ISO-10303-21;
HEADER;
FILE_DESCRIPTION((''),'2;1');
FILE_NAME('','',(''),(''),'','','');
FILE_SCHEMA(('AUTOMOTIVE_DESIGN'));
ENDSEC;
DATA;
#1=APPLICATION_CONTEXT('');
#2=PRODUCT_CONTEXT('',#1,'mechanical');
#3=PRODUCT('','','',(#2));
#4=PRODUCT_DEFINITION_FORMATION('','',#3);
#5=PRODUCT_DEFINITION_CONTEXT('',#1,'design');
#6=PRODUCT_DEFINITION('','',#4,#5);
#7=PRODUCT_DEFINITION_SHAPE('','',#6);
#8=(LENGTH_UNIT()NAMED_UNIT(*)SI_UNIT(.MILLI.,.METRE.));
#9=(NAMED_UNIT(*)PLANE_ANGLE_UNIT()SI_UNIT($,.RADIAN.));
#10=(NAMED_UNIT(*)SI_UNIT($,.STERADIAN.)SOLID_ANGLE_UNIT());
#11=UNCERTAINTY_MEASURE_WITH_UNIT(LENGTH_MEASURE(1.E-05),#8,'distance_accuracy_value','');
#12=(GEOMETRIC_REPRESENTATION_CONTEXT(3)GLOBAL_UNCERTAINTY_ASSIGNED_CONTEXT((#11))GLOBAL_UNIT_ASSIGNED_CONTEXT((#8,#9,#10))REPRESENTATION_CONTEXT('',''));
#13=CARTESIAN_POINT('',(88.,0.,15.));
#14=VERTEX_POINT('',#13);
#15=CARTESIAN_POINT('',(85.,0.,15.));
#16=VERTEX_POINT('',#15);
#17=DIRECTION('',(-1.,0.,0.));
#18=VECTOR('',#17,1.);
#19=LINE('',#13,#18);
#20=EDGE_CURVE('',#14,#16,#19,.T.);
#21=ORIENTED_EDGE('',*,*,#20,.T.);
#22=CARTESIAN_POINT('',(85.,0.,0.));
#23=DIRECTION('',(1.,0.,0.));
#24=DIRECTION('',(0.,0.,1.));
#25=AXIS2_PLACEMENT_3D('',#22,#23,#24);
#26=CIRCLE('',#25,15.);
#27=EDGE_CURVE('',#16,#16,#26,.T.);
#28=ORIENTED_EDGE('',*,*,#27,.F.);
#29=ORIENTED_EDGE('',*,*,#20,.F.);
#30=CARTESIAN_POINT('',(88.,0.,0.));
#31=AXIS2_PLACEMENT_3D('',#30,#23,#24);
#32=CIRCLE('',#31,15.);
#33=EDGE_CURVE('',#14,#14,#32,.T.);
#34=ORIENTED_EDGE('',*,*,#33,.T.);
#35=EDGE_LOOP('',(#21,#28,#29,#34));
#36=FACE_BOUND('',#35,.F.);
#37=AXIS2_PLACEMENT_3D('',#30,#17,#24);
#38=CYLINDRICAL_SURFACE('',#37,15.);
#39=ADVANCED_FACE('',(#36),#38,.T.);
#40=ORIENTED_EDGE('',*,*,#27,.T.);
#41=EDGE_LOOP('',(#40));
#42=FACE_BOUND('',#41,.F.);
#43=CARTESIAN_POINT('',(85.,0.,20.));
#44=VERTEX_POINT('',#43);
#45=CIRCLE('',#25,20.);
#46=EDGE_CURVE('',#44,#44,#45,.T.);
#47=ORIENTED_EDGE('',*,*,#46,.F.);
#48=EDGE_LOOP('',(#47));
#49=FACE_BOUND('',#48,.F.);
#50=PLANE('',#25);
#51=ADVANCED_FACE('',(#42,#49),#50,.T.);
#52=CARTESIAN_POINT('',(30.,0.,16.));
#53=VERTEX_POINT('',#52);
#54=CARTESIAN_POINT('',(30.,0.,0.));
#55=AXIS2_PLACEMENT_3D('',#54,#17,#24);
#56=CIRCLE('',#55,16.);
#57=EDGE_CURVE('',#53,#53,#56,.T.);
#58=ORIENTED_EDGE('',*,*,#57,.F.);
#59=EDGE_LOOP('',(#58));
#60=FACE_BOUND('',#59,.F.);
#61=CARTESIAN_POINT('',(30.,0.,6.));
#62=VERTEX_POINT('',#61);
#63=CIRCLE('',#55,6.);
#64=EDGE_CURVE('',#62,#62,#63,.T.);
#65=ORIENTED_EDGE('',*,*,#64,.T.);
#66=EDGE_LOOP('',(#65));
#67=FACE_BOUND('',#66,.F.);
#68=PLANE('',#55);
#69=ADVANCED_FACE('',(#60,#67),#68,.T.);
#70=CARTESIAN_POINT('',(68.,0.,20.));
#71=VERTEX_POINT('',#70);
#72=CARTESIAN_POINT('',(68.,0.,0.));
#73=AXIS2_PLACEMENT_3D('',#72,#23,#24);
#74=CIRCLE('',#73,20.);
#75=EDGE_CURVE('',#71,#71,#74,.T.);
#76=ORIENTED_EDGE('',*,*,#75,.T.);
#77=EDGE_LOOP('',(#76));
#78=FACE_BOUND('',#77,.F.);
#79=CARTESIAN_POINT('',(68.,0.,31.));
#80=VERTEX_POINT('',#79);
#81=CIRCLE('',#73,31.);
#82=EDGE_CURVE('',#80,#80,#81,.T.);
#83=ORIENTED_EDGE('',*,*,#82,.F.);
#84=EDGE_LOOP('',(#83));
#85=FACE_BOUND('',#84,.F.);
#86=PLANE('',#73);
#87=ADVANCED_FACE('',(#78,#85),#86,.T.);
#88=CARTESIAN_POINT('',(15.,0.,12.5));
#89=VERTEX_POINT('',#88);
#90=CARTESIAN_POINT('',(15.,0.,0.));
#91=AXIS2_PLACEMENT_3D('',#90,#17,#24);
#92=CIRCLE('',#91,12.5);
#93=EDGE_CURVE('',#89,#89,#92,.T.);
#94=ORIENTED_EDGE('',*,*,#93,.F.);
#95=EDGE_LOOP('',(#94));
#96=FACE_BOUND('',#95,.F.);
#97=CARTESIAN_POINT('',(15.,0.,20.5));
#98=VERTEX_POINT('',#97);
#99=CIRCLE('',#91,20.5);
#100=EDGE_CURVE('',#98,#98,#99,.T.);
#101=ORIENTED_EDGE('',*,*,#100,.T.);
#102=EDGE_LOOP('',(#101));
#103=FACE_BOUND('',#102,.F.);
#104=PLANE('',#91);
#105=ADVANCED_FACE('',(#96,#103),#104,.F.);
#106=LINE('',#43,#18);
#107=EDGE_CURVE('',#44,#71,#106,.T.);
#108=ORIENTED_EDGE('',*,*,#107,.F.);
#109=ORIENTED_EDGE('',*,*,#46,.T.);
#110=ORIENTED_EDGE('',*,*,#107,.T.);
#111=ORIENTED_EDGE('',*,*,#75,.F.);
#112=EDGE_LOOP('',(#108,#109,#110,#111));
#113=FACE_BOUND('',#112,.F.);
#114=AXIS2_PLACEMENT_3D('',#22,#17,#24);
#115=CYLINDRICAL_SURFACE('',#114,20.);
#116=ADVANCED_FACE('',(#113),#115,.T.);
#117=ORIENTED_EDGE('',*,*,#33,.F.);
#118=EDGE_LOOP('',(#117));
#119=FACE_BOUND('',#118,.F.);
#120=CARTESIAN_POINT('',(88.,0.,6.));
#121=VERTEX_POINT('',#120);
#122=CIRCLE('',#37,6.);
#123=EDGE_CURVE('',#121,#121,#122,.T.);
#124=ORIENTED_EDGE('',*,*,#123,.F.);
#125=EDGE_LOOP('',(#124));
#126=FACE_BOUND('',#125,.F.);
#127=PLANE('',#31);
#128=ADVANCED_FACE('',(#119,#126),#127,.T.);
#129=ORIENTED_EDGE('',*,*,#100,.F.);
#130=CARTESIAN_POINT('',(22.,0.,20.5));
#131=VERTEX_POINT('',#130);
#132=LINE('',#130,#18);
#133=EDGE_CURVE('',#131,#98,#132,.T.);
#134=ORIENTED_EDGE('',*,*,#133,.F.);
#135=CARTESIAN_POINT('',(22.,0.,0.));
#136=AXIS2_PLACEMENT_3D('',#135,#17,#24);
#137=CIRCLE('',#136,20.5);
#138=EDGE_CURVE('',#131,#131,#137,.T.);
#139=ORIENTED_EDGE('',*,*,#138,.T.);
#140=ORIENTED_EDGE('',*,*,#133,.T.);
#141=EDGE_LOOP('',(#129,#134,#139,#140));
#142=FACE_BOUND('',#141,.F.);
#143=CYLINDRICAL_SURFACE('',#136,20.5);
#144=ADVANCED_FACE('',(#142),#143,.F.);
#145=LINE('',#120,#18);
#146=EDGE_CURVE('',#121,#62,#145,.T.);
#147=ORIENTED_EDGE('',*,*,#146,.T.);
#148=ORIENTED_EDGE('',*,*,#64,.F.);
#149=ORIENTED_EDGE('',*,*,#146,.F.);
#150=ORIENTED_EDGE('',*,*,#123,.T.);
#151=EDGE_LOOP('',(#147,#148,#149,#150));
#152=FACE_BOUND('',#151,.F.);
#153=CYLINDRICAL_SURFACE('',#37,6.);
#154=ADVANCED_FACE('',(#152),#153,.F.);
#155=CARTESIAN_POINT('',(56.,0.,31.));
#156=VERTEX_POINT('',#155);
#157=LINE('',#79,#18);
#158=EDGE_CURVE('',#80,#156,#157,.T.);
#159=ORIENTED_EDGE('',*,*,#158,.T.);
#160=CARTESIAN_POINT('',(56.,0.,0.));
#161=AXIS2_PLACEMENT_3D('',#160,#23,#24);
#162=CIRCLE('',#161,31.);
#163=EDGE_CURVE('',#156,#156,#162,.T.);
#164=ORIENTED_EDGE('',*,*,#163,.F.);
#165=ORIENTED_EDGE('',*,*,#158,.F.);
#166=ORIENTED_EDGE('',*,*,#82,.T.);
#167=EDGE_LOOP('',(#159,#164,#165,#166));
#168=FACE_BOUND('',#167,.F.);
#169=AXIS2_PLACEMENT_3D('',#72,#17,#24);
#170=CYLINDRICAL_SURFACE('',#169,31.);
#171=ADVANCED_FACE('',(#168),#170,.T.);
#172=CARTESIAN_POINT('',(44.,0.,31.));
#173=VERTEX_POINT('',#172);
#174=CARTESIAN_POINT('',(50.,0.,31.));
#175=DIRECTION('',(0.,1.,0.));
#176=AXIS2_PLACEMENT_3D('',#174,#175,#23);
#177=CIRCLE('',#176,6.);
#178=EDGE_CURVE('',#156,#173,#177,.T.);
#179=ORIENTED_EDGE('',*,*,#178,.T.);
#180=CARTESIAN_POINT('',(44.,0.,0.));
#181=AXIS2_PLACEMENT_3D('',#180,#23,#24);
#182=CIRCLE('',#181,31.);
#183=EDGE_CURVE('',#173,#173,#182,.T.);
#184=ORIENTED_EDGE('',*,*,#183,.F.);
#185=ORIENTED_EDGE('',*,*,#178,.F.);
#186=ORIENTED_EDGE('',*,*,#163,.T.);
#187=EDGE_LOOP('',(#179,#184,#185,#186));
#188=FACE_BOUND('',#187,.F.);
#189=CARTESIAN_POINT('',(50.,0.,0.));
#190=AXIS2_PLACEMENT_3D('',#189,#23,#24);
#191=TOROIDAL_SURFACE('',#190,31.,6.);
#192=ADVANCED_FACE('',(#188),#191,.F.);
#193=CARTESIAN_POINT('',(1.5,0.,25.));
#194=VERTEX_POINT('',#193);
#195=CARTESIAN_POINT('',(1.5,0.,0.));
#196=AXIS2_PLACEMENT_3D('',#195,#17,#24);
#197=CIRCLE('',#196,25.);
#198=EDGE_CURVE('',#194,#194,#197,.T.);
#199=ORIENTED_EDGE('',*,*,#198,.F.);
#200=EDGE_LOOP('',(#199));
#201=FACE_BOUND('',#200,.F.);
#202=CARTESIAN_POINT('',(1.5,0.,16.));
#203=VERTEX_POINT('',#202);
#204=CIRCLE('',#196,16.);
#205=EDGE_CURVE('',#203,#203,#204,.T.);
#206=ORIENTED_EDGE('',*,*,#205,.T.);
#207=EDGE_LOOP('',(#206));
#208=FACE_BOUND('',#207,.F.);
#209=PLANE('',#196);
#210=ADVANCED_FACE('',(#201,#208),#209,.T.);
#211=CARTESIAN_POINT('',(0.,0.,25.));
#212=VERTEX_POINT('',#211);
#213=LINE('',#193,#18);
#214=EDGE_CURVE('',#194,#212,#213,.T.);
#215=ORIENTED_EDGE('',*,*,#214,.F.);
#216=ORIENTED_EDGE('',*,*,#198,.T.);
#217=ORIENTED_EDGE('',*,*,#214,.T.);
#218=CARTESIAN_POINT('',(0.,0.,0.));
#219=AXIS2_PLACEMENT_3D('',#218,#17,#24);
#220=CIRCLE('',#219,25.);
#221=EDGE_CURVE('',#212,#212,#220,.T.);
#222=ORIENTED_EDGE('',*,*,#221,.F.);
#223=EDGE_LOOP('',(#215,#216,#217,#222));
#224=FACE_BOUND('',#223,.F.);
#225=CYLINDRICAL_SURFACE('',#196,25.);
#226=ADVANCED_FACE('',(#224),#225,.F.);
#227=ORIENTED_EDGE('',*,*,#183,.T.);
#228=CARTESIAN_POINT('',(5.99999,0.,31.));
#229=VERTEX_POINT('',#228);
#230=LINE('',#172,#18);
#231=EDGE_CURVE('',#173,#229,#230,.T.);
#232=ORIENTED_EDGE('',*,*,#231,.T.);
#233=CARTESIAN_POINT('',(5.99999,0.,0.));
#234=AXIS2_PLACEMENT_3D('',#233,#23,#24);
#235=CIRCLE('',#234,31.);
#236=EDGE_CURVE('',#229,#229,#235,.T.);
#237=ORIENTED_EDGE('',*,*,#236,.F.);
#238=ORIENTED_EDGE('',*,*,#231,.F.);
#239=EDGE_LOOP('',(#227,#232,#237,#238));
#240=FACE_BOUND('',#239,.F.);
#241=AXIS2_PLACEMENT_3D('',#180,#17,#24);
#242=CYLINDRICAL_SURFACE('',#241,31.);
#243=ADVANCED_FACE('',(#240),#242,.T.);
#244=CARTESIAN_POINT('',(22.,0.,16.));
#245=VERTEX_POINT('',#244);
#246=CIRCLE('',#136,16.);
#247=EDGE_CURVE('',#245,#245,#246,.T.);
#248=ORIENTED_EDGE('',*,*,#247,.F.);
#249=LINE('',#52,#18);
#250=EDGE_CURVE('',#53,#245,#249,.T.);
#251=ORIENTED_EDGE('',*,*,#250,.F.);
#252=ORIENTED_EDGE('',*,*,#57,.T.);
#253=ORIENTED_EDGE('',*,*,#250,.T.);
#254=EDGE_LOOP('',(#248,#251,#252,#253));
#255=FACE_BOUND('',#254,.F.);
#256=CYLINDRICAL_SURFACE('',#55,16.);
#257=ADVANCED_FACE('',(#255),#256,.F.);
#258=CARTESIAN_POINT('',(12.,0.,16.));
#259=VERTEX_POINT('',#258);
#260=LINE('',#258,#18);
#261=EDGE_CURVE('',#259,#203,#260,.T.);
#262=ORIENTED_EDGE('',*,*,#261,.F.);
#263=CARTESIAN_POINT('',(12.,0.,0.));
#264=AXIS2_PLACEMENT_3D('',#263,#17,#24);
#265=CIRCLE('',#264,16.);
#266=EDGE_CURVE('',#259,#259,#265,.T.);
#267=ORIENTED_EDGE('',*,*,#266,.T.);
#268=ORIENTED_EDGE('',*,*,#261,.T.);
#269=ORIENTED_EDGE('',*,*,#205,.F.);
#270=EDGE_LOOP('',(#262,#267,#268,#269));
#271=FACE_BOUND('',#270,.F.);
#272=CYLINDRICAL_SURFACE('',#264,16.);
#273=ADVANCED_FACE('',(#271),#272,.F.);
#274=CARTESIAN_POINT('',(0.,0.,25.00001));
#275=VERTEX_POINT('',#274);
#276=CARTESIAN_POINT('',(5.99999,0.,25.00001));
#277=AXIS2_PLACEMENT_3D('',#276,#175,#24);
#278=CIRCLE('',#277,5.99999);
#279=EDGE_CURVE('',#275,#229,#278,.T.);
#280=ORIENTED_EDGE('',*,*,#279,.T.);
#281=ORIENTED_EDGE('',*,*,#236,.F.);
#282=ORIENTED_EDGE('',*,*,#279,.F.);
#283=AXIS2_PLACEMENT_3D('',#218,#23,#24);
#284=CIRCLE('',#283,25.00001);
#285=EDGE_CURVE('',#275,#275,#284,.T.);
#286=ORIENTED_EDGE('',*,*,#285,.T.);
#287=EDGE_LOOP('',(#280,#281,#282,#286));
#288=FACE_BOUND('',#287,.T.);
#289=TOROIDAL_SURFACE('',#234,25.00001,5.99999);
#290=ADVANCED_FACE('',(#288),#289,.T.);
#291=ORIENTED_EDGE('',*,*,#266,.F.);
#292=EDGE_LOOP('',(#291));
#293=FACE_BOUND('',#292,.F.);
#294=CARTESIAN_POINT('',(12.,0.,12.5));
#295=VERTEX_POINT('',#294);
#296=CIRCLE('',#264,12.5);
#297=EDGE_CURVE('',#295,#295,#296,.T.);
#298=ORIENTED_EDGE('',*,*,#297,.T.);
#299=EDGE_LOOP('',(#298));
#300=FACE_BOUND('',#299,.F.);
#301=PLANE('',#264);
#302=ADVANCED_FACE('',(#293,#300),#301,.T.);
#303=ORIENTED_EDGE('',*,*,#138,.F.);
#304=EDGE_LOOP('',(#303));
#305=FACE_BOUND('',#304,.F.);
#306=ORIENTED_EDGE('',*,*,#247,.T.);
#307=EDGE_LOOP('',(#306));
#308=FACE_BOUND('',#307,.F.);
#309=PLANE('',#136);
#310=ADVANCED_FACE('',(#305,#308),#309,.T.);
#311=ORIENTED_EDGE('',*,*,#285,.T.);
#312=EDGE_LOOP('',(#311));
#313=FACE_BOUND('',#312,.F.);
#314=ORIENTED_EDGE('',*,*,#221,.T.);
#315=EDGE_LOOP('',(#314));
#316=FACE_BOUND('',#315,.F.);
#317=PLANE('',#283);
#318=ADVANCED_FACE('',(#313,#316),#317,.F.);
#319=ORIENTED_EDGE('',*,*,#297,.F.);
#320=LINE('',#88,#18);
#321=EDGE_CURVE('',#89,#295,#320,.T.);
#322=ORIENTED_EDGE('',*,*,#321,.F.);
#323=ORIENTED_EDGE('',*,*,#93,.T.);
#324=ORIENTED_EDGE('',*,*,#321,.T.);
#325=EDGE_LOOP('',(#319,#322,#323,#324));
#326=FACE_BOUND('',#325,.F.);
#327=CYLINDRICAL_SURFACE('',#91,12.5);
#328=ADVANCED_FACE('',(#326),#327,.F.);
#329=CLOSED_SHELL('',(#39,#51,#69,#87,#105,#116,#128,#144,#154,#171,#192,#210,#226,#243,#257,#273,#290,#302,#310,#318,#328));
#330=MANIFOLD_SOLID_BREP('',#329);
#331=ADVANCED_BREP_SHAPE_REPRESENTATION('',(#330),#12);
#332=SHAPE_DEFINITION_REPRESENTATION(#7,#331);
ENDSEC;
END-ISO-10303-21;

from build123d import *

# Parameters (mm, degrees)
F4_R = 5.99999


# Not quite as in the source:
# - a fillet or chamfer is up to 0.001 mm smaller than in the source, because OpenCascade refuses the exact size


with BuildPart() as f1:
    # F0 (on Front) → F1 (revolve)
    with BuildSketch(Plane.XZ):
        with BuildLine():
            Line((0, 31), (0, 0))
            Line((0, 0), (88, 0))
            Line((88, 0), (88, 15))
            Line((88, 15), (85, 15))
            Line((85, 15), (85, 20))
            Line((85, 20), (68, 20))
            Line((68, 20), (68, 31))
            Line((68, 31), (56, 31))
            ThreePointArc((56, 31), (50, 25), (44, 31))
            Line((44, 31), (0, 31))
        make_face()
    revolve(axis=Axis((48.1394192929, 0, 0), (1, 0, 0)))

    # F2 (on Front) → F3 (revolve, cut)
    with BuildSketch(Plane.XZ):
        Polygon((0, 25), (0, 0), (88, 0), (88, 6), (30, 6), (30, 16), (22, 16), (22, 20.5), (15, 20.5), (15, 12.5), (12, 12.5), (12, 16), (1.5, 16), (1.5, 25), align=None)
    revolve(axis=Axis((-13.0126860076, 0, 0), (-1, 0, 0)), mode=Mode.SUBTRACT)

    # F4 (radius 6 in the source; OpenCascade refuses exactly that, so slightly less here)
    f4_edges = [f1.edges().sort_by_distance(p)[0] for p in [
        (0, 0, -31),
    ]]
    fillet(f4_edges, radius=F4_R)


solid = f1.part
